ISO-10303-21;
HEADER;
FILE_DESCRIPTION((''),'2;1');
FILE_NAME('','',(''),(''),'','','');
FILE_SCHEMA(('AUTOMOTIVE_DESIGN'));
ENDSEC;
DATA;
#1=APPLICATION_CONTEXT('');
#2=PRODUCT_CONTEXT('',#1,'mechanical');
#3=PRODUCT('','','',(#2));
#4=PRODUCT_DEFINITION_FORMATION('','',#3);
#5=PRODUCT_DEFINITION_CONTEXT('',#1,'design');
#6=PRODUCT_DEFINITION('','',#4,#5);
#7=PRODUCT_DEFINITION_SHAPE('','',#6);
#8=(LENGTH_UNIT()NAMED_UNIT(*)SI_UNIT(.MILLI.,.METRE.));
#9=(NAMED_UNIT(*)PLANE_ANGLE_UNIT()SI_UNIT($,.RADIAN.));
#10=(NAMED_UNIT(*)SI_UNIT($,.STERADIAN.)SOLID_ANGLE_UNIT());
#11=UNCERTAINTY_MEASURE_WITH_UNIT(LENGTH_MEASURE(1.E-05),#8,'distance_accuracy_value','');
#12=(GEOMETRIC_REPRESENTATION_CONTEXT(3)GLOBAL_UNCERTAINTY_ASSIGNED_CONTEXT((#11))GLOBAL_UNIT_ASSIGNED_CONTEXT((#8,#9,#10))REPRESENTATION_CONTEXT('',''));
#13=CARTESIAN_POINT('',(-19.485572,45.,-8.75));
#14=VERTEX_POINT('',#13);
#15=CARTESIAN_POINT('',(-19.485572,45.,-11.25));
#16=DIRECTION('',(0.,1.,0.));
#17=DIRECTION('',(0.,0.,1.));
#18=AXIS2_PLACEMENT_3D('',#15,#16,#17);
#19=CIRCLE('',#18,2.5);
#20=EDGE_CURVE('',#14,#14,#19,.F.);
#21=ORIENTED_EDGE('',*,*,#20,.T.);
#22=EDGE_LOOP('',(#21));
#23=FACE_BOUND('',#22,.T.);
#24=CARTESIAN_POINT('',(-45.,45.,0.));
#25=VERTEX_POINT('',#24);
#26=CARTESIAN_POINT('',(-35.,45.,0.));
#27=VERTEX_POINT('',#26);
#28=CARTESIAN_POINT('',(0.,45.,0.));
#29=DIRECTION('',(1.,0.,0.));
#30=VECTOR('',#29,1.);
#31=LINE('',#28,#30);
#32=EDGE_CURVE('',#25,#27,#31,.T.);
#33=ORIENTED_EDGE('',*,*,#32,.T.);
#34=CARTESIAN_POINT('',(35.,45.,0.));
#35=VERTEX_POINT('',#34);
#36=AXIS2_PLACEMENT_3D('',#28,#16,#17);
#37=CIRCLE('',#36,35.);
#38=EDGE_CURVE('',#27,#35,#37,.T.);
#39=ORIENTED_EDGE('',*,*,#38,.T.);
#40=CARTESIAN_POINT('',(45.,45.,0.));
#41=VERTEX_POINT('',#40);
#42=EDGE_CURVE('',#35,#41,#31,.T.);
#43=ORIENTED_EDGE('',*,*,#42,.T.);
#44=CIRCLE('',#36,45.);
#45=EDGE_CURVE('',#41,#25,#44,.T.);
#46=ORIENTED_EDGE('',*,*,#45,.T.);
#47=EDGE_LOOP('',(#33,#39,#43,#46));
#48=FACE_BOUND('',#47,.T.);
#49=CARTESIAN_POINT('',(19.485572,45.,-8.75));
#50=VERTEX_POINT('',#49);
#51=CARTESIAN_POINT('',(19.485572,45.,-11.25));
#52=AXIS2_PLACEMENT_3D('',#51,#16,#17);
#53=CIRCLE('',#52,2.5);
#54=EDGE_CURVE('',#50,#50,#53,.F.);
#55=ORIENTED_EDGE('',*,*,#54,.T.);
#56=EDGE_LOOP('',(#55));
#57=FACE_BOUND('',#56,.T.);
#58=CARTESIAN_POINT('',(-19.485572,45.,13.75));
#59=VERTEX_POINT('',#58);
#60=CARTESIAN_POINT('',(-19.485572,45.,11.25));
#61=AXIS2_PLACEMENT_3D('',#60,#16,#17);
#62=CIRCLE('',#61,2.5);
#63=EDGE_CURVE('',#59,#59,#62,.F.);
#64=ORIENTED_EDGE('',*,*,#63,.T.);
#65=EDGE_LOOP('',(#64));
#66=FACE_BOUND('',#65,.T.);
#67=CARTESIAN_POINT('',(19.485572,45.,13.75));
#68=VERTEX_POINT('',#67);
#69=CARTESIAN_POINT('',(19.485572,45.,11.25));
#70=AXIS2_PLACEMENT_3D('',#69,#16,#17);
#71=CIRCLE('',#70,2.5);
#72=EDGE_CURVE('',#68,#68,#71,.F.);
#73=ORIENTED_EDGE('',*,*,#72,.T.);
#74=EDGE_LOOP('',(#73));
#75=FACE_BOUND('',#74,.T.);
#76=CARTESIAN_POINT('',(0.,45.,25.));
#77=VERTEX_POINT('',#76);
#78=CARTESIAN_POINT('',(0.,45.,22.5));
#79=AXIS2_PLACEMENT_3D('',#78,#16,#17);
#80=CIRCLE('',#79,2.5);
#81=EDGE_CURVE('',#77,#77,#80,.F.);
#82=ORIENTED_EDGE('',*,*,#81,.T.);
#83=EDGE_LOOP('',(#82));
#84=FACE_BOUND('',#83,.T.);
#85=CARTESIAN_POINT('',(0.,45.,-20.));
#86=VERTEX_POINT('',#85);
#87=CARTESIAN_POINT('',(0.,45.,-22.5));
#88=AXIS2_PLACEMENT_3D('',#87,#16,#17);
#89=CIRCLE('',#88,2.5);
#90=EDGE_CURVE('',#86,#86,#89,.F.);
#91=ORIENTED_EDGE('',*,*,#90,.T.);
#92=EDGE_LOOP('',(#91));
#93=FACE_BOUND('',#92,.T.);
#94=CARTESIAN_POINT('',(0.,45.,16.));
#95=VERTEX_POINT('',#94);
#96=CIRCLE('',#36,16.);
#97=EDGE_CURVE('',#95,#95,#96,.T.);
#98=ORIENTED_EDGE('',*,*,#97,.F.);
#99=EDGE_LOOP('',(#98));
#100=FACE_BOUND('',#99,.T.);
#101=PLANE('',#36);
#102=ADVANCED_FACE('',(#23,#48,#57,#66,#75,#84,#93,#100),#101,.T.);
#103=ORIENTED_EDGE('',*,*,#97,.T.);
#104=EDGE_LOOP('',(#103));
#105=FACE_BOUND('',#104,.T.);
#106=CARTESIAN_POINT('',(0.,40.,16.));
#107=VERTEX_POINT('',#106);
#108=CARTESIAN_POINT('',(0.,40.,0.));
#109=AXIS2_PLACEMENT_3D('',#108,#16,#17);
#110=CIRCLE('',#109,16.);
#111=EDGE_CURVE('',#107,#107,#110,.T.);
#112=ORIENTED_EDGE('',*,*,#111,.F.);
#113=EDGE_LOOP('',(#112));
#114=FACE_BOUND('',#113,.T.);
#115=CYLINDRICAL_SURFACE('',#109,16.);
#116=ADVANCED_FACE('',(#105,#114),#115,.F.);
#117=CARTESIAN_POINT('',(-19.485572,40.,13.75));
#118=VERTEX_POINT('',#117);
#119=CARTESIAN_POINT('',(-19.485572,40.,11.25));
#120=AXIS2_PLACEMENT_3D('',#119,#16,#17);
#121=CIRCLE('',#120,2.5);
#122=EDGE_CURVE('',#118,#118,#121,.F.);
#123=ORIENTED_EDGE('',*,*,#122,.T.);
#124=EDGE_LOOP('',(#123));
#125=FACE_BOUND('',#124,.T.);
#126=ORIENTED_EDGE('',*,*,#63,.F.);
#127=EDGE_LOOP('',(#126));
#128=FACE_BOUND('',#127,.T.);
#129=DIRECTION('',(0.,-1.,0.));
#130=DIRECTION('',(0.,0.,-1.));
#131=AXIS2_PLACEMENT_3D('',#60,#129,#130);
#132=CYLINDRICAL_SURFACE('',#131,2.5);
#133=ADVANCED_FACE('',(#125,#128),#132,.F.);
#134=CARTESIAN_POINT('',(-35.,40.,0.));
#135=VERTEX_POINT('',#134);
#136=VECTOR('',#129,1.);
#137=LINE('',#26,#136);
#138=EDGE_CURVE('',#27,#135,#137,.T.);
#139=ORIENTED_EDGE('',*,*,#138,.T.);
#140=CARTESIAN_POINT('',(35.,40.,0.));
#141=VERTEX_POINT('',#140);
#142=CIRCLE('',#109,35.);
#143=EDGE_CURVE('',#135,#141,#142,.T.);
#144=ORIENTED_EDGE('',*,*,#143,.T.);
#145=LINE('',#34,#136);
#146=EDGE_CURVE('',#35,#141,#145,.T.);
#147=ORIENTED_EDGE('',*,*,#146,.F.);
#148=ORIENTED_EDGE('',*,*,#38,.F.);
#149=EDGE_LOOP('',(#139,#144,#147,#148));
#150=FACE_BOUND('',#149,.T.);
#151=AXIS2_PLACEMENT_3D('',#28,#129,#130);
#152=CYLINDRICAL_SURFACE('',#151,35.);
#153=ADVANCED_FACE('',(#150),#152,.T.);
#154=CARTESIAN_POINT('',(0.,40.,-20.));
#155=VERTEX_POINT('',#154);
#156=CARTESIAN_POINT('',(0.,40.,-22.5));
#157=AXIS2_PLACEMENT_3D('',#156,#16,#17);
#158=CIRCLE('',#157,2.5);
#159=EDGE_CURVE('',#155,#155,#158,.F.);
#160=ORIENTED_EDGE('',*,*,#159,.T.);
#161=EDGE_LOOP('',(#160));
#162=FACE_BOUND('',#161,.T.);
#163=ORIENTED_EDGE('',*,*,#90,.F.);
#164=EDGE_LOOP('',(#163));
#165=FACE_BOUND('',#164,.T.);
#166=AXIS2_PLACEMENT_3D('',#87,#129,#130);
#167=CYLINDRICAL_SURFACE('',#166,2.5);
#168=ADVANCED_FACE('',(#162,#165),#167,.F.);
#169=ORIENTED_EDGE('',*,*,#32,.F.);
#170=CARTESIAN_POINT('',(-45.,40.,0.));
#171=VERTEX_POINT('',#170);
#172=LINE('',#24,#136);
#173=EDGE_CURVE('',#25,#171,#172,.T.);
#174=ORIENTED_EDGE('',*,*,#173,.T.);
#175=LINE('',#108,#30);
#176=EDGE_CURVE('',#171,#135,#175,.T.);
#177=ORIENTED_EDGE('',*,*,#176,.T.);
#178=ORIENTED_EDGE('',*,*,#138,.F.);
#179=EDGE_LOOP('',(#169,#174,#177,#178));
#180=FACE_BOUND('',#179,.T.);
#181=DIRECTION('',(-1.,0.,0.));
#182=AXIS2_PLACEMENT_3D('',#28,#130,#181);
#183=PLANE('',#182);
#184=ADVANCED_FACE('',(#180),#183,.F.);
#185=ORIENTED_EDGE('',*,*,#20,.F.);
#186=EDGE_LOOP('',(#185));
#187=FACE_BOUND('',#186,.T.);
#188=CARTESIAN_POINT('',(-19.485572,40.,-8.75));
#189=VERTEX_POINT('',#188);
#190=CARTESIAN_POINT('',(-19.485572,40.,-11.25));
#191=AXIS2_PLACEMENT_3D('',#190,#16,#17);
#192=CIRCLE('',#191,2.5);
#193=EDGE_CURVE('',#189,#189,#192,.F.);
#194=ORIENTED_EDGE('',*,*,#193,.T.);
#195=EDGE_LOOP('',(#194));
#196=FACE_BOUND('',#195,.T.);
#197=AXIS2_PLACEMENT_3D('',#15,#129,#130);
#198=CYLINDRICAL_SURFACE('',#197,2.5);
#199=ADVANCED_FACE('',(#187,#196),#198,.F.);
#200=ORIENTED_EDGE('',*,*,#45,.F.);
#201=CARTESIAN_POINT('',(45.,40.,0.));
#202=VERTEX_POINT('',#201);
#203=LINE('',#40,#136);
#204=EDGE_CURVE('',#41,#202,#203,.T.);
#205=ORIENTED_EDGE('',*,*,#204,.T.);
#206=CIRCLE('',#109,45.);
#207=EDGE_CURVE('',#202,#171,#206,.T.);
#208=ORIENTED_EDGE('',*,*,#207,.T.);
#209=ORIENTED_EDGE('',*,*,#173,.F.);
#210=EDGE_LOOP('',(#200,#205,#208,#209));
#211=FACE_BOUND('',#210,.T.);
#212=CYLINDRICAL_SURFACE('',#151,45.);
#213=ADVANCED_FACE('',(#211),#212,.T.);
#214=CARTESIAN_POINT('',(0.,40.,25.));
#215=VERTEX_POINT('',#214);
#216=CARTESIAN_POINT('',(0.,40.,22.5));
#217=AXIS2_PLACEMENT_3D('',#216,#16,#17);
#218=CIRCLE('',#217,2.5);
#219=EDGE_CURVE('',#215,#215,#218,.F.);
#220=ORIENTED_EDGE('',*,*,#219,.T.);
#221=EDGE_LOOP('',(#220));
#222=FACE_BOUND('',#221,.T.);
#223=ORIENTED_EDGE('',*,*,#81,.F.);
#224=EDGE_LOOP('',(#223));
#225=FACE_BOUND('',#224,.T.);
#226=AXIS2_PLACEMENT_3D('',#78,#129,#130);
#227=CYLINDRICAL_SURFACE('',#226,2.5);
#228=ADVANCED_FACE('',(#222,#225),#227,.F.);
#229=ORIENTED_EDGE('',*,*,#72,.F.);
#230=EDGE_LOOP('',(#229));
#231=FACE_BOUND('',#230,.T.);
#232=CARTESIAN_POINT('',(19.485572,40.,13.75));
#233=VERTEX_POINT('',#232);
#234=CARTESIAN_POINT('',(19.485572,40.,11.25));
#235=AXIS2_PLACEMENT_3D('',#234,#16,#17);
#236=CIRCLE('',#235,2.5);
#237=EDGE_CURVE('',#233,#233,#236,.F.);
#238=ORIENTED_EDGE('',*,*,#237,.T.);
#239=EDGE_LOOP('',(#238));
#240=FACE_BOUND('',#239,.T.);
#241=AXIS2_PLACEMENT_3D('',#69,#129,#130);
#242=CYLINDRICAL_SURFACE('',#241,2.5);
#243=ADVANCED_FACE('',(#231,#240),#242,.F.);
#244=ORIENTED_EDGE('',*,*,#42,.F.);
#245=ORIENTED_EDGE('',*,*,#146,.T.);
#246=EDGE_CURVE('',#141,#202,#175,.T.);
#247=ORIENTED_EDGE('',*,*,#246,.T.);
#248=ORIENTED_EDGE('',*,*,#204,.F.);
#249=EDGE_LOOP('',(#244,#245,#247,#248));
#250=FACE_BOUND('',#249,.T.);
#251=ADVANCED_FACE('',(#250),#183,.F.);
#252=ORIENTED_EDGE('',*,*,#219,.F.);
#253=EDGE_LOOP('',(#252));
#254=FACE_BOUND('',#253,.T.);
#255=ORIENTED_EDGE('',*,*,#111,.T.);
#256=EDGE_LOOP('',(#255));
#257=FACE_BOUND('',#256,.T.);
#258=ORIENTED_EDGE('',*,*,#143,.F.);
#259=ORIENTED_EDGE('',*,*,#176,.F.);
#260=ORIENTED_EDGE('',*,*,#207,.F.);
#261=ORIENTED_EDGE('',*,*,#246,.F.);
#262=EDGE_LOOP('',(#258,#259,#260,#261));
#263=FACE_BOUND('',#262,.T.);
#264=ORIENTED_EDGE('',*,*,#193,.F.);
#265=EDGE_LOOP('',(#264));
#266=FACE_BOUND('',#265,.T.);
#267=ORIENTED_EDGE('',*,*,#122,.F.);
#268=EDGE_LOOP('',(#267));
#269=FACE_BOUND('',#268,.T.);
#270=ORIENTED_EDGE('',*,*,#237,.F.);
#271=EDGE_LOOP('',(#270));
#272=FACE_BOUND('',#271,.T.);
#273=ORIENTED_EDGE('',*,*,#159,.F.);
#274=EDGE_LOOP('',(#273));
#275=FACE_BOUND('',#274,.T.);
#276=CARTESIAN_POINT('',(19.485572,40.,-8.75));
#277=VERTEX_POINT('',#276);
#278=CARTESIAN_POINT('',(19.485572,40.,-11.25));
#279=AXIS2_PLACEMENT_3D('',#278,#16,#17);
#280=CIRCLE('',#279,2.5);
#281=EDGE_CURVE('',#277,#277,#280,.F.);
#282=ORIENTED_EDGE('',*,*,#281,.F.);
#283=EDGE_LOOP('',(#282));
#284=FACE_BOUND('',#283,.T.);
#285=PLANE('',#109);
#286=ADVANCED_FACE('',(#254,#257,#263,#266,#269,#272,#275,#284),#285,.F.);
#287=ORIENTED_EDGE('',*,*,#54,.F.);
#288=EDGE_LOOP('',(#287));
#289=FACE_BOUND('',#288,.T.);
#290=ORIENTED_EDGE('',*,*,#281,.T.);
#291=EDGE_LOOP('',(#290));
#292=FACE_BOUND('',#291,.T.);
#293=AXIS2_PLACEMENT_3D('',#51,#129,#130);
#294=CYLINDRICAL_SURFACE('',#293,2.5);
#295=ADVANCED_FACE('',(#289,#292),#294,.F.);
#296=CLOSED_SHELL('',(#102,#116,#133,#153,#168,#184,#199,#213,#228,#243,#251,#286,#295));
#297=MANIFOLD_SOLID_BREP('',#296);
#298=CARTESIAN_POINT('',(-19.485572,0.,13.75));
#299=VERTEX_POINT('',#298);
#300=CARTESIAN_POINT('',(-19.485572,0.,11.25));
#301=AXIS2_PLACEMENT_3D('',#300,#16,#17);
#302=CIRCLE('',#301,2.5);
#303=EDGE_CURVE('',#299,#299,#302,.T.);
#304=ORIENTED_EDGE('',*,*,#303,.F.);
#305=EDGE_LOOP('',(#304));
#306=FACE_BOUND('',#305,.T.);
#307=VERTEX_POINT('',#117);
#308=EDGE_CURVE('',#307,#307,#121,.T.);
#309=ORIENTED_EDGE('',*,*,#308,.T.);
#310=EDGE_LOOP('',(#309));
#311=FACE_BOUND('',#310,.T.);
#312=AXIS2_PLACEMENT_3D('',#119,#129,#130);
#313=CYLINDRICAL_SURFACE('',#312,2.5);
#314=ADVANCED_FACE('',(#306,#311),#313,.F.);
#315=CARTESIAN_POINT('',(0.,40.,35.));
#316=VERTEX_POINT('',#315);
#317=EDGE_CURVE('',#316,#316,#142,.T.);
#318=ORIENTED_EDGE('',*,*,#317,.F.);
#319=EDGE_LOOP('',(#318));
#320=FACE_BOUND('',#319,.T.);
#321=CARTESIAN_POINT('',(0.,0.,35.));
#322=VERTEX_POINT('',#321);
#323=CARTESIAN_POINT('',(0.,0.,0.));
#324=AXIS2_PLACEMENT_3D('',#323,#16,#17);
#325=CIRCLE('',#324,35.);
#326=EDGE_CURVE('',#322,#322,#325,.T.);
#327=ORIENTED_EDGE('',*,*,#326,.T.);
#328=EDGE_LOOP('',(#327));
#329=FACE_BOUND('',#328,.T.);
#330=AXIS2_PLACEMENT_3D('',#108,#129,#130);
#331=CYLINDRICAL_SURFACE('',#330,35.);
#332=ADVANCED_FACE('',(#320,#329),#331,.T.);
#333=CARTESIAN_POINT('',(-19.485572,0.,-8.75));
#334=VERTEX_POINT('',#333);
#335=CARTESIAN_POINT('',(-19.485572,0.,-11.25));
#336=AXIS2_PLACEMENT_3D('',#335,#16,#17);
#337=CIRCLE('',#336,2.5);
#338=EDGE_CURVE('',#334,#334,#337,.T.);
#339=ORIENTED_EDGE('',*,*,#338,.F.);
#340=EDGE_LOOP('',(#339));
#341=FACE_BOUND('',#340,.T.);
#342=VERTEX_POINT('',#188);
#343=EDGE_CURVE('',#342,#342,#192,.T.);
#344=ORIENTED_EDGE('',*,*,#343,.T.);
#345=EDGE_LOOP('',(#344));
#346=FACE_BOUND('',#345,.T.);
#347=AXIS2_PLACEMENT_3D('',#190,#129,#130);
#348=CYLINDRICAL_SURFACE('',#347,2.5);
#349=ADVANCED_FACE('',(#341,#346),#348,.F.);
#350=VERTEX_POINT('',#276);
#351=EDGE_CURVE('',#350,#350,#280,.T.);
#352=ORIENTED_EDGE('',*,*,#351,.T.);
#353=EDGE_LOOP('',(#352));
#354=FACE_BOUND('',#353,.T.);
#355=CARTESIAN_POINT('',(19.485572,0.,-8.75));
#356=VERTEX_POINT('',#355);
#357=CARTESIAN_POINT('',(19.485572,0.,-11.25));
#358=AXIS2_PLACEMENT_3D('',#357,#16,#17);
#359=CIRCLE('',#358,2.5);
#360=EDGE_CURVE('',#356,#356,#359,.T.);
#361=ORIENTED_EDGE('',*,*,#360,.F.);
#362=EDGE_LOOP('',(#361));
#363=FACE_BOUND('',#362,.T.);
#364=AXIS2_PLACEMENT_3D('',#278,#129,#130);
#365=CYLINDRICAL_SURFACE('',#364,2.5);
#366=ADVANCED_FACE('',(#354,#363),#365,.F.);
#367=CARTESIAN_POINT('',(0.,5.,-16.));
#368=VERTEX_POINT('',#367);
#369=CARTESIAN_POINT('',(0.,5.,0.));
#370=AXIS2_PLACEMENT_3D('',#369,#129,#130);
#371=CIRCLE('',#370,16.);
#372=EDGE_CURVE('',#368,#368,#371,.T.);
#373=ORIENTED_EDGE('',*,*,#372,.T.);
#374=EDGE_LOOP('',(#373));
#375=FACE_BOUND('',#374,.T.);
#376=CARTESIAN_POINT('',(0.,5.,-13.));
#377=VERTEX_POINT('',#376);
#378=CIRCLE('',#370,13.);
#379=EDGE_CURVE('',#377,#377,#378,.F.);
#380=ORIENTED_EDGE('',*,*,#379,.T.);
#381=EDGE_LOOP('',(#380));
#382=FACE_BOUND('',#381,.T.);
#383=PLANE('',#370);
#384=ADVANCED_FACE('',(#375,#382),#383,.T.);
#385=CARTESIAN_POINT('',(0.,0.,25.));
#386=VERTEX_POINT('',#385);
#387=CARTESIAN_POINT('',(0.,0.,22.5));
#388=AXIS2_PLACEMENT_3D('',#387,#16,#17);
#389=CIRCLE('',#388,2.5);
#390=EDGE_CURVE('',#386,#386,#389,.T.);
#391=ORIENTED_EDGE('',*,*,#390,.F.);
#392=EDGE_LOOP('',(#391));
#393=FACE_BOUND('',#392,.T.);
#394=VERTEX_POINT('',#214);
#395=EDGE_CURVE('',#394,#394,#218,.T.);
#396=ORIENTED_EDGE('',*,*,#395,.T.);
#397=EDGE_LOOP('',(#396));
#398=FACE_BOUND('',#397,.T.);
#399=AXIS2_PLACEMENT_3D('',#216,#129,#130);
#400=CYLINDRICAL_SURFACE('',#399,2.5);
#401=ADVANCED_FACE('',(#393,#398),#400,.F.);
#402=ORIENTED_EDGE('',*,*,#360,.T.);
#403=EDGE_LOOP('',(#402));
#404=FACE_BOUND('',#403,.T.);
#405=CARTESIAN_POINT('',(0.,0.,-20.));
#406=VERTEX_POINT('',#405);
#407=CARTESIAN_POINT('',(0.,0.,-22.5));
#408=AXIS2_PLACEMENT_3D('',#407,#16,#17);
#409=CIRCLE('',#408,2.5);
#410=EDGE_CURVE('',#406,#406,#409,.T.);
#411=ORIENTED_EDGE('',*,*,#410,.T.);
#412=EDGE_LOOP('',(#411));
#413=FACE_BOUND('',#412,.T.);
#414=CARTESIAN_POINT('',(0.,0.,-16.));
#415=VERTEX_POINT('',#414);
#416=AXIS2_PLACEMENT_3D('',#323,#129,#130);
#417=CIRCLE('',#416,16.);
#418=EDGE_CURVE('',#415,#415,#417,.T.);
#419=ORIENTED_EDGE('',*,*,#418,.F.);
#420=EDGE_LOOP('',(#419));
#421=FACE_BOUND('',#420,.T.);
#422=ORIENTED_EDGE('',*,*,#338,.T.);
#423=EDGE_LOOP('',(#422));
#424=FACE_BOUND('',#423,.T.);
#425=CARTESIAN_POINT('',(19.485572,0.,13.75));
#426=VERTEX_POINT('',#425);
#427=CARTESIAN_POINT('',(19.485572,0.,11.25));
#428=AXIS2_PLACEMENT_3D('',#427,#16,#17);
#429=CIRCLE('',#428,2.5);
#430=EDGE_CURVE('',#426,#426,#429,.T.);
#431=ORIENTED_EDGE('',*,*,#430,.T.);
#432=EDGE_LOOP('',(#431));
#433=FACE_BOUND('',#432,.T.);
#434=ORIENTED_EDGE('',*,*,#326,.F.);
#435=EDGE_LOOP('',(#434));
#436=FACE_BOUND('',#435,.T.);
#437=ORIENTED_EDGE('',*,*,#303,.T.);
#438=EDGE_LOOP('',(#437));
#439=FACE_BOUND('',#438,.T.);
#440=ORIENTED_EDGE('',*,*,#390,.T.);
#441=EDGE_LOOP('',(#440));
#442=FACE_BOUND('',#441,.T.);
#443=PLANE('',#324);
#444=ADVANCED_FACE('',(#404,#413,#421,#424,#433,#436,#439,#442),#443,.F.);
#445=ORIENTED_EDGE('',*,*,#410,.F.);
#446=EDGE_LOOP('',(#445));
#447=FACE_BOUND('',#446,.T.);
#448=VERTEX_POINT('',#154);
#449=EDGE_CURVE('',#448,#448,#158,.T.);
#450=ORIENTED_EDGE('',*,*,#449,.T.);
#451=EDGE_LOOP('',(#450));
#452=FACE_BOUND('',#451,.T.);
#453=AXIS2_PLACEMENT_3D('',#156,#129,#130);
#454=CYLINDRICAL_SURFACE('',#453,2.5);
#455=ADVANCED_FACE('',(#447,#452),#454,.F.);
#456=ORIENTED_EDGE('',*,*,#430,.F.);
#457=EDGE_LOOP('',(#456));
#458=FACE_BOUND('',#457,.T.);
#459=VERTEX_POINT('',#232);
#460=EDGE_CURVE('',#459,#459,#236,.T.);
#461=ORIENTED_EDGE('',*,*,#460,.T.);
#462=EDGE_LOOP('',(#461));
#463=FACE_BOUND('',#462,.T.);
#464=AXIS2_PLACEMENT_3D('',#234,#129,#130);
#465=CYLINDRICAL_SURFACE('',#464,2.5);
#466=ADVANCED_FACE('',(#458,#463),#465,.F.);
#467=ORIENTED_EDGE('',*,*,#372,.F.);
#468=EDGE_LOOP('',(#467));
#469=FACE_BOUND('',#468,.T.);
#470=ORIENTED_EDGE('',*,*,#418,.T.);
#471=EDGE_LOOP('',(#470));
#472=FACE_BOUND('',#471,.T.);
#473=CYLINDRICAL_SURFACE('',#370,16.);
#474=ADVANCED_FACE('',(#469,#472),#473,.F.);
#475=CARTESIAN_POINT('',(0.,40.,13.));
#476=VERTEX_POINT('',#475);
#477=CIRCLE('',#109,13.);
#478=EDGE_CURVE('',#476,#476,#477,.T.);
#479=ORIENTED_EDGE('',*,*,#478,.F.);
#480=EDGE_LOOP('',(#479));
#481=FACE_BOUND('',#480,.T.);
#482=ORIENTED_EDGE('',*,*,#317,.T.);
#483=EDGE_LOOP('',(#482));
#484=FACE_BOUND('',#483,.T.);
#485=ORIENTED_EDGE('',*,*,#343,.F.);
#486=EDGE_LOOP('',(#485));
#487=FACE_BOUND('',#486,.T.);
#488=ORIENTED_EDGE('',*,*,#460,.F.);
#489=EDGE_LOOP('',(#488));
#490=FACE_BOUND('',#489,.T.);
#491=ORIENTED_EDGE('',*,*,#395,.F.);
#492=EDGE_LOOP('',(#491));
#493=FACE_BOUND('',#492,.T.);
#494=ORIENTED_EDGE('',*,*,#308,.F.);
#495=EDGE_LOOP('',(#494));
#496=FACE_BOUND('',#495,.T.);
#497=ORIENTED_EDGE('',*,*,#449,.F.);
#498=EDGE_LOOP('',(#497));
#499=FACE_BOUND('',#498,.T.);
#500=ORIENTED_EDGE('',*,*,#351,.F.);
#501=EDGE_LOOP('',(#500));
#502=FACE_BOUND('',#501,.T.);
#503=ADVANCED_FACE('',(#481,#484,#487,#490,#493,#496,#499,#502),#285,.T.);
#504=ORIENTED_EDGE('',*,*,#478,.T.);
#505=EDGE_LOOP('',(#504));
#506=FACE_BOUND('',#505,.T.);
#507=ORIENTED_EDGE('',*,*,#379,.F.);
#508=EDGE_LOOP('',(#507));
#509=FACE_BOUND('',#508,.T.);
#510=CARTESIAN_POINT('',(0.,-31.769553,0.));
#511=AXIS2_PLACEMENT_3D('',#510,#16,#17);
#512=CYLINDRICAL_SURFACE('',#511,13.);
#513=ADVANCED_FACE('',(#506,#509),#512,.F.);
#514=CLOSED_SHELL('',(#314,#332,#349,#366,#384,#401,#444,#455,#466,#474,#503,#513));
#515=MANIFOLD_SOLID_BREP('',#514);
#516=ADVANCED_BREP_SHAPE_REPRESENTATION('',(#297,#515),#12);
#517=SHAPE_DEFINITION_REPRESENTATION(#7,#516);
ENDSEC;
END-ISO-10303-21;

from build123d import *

# Parameters (mm, degrees)
SKETCH1_R                 = 35
SKETCH1_R_2               = 5
SKETCH1_R_3               = 2.5
BOSS_EXTRUDE1_DEPTH       = 40
SKETCH2_R                 = 16
CUT_EXTRUDE1_DEPTH        = 5
SKETCH5_R                 = 13
CUT_EXTRUDE2_DEPTH        = 35
BOSS_EXTRUDE2_OUTLINE_R   = 2.5
BOSS_EXTRUDE2_OUTLINE_R_2 = 13
BOSS_EXTRUDE2_DEPTH       = 5
CUT_EXTRUDE3_START        = -5
SKETCH7_R                 = 16
CUT_EXTRUDE3_DEPTH        = 5


# Read off the part's stored shape, not the designer's step: Boss-Extrude2
with BuildPart() as part:
    # Sketch1 → Boss-Extrude1 (new body)
    with BuildSketch(Plane(origin=(0, 0, 0), x_dir=(1, 0, 0), z_dir=(0, 1, 0))):
        with Locations(Location((0, 0, 0), (0, 0, 270))):
            Circle(SKETCH1_R)
        with Locations(Location((0, 0, 0), (0, 0, 270))):
            Circle(SKETCH1_R_2, mode=Mode.SUBTRACT)
        with Locations(Location((0, 22.5, 0), (0, 0, 270))):
            Circle(SKETCH1_R_3, mode=Mode.SUBTRACT)
        with Locations(Location((19.485571585, 11.25, 0), (0, 0, 270))):
            Circle(SKETCH1_R_3, mode=Mode.SUBTRACT)
        with Locations(Location((19.485571585, -11.25, 0), (0, 0, 270))):
            Circle(SKETCH1_R_3, mode=Mode.SUBTRACT)
        with Locations(Location((0, -22.5, 0), (0, 0, 270))):
            Circle(SKETCH1_R_3, mode=Mode.SUBTRACT)
        with Locations(Location((-19.485571585, -11.25, 0), (0, 0, 270))):
            Circle(SKETCH1_R_3, mode=Mode.SUBTRACT)
        with Locations(Location((-19.485571585, 11.25, 0), (0, 0, 270))):
            Circle(SKETCH1_R_3, mode=Mode.SUBTRACT)
    extrude(amount=BOSS_EXTRUDE1_DEPTH)

    # Sketch2 → Cut-Extrude1 (cut)
    with BuildSketch(Plane.XZ):
        with Locations(Location((0, 0, 0), (0, 0, 270))):
            Circle(SKETCH2_R)
    extrude(amount=-CUT_EXTRUDE1_DEPTH, mode=Mode.SUBTRACT)

    # Sketch5 → Cut-Extrude2 (cut)
    with BuildSketch(Plane(origin=(0, 40, 0), x_dir=(1, 0, 0), z_dir=(0, 1, 0))):
        with Locations(Location((0, 0, 0), (0, 0, 270))):
            Circle(SKETCH5_R)
    extrude(amount=-CUT_EXTRUDE2_DEPTH, mode=Mode.SUBTRACT)


with BuildPart() as body_2:
    # Boss-Extrude2 outline → Boss-Extrude2 (new body)
    with BuildSketch(Plane(origin=(0, 40, 0), x_dir=(1, 0, 0), z_dir=(0, 1, 0))):
        with BuildLine():
            Line((35, 0), (45, 0))
            ThreePointArc((45, 0), (0, 45), (-45, 0))
            Line((-45, 0), (-35, 0))
            ThreePointArc((-35, 0), (0, -35), (35, 0))
        make_face()
        with Locations((-19.485571585, -11.25)):
            Circle(BOSS_EXTRUDE2_OUTLINE_R, mode=Mode.SUBTRACT)
        with Locations((0, -22.5)):
            Circle(BOSS_EXTRUDE2_OUTLINE_R, mode=Mode.SUBTRACT)
        with Locations((19.485571585, -11.25)):
            Circle(BOSS_EXTRUDE2_OUTLINE_R, mode=Mode.SUBTRACT)
        Circle(BOSS_EXTRUDE2_OUTLINE_R_2, mode=Mode.SUBTRACT)
        with Locations((-19.485571585, 11.25)):
            Circle(BOSS_EXTRUDE2_OUTLINE_R, mode=Mode.SUBTRACT)
        with Locations((19.485571585, 11.25)):
            Circle(BOSS_EXTRUDE2_OUTLINE_R, mode=Mode.SUBTRACT)
        with Locations((0, 22.5)):
            Circle(BOSS_EXTRUDE2_OUTLINE_R, mode=Mode.SUBTRACT)
    extrude(amount=BOSS_EXTRUDE2_DEPTH)

    # Sketch7 → Cut-Extrude3 (cut)
    with BuildSketch(Plane(origin=(0, 45, 0), x_dir=(1, 0, 0), z_dir=(0, 1, 0)).offset(CUT_EXTRUDE3_START)):
        with Locations(Location((0, 0, 0), (0, 0, 270))):
            Circle(SKETCH7_R)
    extrude(amount=CUT_EXTRUDE3_DEPTH, mode=Mode.SUBTRACT)


solid = Compound([part.part, body_2.part])
